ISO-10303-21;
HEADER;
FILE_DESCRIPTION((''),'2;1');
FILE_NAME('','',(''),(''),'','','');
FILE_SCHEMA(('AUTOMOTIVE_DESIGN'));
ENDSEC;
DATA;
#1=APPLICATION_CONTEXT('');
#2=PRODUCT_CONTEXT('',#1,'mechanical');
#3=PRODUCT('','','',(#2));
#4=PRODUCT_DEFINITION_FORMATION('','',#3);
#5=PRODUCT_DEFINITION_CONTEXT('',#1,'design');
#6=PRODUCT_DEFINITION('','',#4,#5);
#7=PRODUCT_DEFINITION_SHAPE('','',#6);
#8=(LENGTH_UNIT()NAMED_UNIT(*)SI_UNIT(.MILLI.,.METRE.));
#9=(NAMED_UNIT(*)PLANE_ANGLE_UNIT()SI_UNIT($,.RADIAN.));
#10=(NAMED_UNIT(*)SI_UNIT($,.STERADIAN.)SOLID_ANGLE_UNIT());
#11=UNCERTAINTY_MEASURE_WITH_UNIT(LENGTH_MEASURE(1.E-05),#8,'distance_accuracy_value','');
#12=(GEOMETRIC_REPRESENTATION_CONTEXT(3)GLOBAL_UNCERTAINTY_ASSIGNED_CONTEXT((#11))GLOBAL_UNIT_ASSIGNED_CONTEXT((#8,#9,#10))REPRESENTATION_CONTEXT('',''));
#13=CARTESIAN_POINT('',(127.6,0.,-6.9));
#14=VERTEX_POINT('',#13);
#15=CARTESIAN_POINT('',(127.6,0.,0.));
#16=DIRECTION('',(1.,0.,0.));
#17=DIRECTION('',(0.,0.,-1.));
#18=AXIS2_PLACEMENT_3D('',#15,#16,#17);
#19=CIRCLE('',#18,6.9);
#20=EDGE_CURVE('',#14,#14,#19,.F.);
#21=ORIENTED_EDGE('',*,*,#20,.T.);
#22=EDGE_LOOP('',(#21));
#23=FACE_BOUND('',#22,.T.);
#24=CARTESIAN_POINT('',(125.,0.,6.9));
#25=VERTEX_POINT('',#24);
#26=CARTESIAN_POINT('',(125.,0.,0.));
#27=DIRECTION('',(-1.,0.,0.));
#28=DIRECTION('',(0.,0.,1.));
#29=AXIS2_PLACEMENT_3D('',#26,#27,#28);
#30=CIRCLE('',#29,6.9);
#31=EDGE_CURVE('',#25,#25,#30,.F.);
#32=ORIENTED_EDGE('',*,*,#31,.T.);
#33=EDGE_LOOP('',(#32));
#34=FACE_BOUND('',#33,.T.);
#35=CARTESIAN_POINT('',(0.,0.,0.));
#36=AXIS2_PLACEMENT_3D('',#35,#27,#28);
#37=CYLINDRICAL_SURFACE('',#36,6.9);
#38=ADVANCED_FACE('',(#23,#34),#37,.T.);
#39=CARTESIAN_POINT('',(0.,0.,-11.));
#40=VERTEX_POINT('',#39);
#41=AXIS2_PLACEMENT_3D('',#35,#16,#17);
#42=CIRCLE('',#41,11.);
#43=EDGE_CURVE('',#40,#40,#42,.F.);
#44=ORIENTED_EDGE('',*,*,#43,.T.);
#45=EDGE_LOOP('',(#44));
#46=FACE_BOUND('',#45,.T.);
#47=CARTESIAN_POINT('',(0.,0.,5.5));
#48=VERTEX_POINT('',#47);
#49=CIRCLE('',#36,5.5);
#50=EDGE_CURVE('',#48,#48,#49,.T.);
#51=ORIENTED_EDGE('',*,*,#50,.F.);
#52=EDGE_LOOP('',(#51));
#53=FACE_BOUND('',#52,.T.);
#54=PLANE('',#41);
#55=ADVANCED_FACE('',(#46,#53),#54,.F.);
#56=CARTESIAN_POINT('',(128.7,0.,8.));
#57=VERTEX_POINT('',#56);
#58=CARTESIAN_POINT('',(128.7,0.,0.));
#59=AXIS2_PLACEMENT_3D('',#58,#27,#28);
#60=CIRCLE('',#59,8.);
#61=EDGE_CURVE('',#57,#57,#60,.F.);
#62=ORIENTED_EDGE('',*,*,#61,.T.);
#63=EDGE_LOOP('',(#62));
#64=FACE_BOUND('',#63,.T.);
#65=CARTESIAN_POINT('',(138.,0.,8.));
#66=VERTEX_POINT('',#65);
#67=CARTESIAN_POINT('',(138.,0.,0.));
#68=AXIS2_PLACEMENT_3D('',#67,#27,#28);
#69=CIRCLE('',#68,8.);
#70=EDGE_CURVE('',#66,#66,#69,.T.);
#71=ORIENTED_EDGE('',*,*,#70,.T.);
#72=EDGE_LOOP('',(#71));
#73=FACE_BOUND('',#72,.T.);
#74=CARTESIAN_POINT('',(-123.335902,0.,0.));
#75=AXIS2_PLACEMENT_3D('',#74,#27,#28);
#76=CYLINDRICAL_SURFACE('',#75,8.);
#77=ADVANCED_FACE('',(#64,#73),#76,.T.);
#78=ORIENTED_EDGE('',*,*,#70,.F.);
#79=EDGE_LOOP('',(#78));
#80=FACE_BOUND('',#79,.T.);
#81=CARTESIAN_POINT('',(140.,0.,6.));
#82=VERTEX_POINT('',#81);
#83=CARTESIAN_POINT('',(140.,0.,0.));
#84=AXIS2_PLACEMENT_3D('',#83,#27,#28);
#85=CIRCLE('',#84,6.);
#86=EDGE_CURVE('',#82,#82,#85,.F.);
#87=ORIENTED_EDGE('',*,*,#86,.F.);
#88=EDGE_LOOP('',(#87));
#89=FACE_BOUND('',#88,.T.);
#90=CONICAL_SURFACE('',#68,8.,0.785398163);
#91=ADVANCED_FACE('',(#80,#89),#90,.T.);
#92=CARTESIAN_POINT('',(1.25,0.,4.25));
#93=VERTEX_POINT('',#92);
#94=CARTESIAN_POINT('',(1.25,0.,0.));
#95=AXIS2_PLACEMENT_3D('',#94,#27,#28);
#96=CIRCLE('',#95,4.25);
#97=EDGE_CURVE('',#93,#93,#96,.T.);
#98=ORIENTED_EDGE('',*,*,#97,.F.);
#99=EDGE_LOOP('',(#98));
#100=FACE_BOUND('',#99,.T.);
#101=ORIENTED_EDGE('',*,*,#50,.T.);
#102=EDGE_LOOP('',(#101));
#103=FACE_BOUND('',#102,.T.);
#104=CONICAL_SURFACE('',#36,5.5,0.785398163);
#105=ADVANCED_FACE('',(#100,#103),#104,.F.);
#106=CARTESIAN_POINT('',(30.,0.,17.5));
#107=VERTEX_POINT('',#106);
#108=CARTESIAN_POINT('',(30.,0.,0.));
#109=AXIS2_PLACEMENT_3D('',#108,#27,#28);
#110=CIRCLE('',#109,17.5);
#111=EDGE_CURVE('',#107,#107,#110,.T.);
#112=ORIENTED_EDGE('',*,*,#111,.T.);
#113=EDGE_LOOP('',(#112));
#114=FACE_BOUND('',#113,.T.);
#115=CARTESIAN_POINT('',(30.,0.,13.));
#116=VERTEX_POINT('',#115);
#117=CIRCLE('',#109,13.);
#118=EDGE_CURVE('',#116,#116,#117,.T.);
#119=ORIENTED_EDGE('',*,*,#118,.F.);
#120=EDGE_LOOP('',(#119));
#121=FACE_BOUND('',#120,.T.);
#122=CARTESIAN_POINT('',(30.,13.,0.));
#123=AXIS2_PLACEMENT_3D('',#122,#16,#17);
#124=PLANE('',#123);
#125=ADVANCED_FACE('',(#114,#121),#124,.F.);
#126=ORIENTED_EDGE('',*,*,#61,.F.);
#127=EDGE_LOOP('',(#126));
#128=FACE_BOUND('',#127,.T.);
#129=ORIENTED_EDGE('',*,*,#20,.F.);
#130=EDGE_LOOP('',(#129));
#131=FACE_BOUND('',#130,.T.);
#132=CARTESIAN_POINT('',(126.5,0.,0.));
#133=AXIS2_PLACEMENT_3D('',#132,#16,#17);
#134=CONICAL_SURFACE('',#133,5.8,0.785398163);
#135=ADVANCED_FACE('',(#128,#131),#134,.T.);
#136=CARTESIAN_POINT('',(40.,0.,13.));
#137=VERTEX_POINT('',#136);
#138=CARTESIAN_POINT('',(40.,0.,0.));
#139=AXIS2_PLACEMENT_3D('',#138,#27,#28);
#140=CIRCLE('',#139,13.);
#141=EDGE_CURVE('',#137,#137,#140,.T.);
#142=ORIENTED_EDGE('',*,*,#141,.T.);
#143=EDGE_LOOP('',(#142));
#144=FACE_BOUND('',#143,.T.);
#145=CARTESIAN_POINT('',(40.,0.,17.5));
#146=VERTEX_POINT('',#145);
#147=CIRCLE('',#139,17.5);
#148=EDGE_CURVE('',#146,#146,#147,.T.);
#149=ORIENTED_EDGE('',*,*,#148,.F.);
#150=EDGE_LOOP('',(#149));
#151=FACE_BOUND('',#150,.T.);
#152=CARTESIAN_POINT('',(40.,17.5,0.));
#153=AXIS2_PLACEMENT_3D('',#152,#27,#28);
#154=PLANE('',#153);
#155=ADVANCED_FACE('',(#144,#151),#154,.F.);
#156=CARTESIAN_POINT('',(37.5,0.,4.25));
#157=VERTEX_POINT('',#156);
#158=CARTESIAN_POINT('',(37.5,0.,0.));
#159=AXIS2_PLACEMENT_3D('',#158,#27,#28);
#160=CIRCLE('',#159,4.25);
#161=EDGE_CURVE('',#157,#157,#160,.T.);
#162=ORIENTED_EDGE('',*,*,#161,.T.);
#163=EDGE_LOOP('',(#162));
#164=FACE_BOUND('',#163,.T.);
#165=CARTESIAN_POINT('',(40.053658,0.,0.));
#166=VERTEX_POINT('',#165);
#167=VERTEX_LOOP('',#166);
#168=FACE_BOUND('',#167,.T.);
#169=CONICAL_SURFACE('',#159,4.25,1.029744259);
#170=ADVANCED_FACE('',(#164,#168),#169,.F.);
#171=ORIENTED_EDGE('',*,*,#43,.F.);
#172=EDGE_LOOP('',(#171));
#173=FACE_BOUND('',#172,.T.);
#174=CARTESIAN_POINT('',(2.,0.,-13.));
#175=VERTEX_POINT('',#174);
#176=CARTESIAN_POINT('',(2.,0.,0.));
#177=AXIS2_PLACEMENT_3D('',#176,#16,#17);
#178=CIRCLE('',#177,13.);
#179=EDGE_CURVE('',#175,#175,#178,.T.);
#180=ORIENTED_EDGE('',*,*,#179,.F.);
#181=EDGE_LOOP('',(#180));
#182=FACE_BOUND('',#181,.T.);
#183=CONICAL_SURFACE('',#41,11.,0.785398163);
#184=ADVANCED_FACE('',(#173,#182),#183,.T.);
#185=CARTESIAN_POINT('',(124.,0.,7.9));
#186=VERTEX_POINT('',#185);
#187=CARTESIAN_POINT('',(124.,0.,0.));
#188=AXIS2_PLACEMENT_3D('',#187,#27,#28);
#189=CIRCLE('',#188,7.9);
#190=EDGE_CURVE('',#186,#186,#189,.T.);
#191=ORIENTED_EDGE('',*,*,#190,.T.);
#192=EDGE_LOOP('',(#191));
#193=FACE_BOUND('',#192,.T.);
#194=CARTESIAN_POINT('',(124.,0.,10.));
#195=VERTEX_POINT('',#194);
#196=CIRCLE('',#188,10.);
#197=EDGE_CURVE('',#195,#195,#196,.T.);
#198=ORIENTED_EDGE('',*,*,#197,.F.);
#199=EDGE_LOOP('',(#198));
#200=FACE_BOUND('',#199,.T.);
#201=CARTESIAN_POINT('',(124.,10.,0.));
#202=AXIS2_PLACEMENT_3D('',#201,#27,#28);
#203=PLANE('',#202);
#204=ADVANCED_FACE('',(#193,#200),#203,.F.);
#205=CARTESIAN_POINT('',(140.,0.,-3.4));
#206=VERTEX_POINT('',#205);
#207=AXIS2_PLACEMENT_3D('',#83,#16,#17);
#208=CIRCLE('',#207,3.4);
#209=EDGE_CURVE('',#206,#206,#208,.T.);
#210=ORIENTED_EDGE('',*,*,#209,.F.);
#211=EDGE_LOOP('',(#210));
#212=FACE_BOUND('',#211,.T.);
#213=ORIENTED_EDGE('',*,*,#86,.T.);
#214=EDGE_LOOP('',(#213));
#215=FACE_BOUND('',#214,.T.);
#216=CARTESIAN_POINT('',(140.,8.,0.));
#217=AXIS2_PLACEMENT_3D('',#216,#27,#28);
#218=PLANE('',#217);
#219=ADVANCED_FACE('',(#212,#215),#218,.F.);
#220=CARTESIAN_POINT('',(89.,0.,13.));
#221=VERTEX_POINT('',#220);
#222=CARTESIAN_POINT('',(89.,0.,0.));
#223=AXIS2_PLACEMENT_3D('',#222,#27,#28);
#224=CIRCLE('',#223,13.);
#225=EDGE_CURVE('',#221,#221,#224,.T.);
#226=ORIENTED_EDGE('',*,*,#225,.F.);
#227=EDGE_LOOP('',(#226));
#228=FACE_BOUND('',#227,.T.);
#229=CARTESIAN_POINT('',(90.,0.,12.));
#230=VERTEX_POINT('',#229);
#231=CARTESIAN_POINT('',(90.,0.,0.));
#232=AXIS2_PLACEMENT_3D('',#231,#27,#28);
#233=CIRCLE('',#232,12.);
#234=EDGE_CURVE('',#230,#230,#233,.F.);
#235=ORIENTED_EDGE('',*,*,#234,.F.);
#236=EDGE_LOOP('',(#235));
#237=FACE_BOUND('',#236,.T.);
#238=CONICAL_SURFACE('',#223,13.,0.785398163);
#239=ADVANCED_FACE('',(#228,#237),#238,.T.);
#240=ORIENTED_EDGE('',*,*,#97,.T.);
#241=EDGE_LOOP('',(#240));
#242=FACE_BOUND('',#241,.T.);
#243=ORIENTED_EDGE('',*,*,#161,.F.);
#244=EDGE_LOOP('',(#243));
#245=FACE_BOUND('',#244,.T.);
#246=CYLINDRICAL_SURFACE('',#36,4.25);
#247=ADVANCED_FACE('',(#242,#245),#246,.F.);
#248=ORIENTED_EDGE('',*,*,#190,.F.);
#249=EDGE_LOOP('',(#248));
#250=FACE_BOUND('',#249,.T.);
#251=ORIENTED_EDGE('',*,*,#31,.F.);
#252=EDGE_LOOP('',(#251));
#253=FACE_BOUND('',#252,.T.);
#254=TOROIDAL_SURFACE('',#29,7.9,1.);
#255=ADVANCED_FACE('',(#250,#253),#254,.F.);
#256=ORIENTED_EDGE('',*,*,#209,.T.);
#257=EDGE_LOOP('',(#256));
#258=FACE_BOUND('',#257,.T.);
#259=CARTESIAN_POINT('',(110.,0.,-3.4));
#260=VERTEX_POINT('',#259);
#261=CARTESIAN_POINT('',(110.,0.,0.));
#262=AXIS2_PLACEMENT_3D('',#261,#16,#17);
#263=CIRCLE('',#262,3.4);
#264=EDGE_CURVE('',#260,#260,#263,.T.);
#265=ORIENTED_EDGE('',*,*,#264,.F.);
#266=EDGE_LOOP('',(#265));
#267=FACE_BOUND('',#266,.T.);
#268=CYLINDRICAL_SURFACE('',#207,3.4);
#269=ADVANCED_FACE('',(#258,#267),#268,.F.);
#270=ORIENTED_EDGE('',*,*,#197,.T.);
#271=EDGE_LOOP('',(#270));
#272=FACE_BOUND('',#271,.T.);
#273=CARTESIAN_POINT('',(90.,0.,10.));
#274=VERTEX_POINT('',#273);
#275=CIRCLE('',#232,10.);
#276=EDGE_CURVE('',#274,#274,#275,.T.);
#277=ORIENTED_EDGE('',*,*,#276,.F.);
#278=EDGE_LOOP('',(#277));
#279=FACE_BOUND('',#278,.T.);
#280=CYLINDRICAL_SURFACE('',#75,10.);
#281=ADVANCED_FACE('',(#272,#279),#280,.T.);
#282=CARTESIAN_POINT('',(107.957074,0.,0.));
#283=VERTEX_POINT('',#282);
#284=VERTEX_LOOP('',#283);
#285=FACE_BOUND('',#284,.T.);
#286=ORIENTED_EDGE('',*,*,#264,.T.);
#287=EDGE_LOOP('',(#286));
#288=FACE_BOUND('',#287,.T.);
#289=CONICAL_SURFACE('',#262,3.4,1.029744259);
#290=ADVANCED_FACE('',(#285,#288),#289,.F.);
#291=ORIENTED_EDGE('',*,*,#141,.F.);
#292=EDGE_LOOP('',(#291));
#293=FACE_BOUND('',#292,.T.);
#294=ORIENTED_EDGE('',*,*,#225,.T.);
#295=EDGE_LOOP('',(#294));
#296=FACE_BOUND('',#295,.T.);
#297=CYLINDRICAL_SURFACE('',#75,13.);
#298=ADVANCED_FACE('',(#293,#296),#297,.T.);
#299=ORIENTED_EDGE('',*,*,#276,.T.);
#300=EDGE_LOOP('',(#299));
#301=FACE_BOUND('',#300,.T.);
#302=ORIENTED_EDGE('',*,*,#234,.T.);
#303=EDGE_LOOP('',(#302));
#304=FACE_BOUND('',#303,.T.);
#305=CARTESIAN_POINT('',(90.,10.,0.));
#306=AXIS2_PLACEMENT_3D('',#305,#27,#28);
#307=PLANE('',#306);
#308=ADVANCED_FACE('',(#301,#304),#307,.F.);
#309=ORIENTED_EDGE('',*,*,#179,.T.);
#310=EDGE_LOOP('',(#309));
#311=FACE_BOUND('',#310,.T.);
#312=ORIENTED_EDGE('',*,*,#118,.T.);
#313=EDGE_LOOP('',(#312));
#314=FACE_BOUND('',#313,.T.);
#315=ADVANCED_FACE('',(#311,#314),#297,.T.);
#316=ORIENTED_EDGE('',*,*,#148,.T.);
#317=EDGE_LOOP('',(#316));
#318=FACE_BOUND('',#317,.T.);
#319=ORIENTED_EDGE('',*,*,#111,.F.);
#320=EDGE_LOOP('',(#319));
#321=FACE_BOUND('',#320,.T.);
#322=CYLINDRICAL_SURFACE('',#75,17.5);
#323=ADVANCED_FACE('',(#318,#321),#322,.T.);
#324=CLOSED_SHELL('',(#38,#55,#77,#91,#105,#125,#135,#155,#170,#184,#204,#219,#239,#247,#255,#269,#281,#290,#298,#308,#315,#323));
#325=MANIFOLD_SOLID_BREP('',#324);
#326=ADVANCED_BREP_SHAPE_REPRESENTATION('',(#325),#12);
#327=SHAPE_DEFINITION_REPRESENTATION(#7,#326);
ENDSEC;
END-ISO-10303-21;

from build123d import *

# Parameters (mm, degrees)
M10X1_52_D            = 8.5
M10X1_52_DEPTH        = 37.5
M10X1_52_CSINK_D      = 11
M10X1_52_CSINK_ANGLE  = 90
M10X1_52_TIP          = 2.553657631
HOLE_WIZARD_M81_D     = 6.8
HOLE_WIZARD_M81_DEPTH = 30
HOLE_WIZARD_M81_TIP   = 2.042926105
SKETCH_6_W            = 2.5
SKETCH_6_H            = 1.1
CHAMFER_1_SIZE        = 2
CHAMFER_2_SIZE        = 1
CHAMFER_3_SIZE        = 2.2
FILLET_1_R            = 1


with BuildPart() as part:
    # Эскиз1 → Повернуть1 (revolve)
    with BuildSketch(Plane.XY, mode=Mode.PRIVATE) as revolve_1_sk:
        Polygon((0, 0), (0, 13), (30, 13), (30, 17.5), (40, 17.5), (40, 13), (90, 13), (90, 10), (124, 10), (124, 8), (140, 8), (140, 0), align=None)
    revolve(revolve_1_sk.sketch.rotate(Axis((-123.335902371, 0, 0), (1, 0, 0)), 90), axis=Axis((-123.335902371, 0, 0), (1, 0, 0)))

    # Отверстие обработанное метчиком M10x1.52
    with Locations(Plane.ZY):
        with Locations((0, 0)):
            CounterSinkHole(M10X1_52_D / 2, M10X1_52_CSINK_D / 2, depth=M10X1_52_DEPTH, counter_sink_angle=M10X1_52_CSINK_ANGLE)
            with Locations((0, 0, -(M10X1_52_DEPTH + M10X1_52_TIP / 2))):  # 118° drill point
                Cone(0, M10X1_52_D / 2, M10X1_52_TIP, mode=Mode.SUBTRACT)

    # Отверстие обработанное метчиком M81
    with Locations(Plane(origin=(140, 0, 0), x_dir=(0, 0, -1), z_dir=(1, 0, 0))):
        with Locations((0, 0)):
            Hole(HOLE_WIZARD_M81_D / 2, depth=HOLE_WIZARD_M81_DEPTH)
            with Locations((0, 0, -(HOLE_WIZARD_M81_DEPTH + HOLE_WIZARD_M81_TIP / 2))):  # 118° drill point
                Cone(0, HOLE_WIZARD_M81_D / 2, HOLE_WIZARD_M81_TIP, mode=Mode.SUBTRACT)

    # Эскиз6 → Вырез-Повернуть1 (revolve, cut)
    with BuildSketch(Plane.XY, mode=Mode.PRIVATE) as cut_revolve_1_sk:
        with Locations((125.25, 7.45)):
            Rectangle(SKETCH_6_W, SKETCH_6_H)
    revolve(cut_revolve_1_sk.sketch.rotate(Axis((0, 0, 0), (1, 0, 0)), 90), axis=Axis((0, 0, 0), (1, 0, 0)), mode=Mode.SUBTRACT)

    # Фаска1
    chamfer_1_edges = [part.edges().sort_by_distance(p)[0] for p in [
        (0, 0, -13),
        (140, 0, -8),
    ]]
    chamfer(chamfer_1_edges, length=CHAMFER_1_SIZE)

    # Фаска2
    chamfer_2_edges = [part.edges().sort_by_distance(p)[0] for p in [
        (90, 0, -13),
    ]]
    chamfer(chamfer_2_edges, length=CHAMFER_2_SIZE)

    # Фаска3
    # the kernel refuses this chamfer: 2.2 mm, written as the material it takes off along each edge
    with BuildSketch(Plane(origin=(126.5, 0, 0), x_dir=(0, 0, 1), z_dir=(0, 1, 0))) as chamfer_3_piece_1_section:
        Polygon((8 - CHAMFER_3_SIZE, 0), (8, CHAMFER_3_SIZE), (8, 0), align=None)
    chamfer_3_piece_1 = revolve(axis=Axis((126.5, 0, 0), (1, 0, 0)), mode=Mode.PRIVATE)
    chamfer_3_piece_1 = chamfer_3_piece_1 - Plane(origin=(128.148983784, 0, 0), x_dir=(0, 0, 1), z_dir=(-1, 0, 0)) * Cylinder(6.9, 32, mode=Mode.PRIVATE)
    add(chamfer_3_piece_1, mode=Mode.SUBTRACT)

    # Скругление1
    fillet_1_edges = [part.edges().sort_by_distance(p)[0] for p in [
        (124, 0, -6.9),
    ]]
    fillet(fillet_1_edges, radius=FILLET_1_R)


solid = part.part
